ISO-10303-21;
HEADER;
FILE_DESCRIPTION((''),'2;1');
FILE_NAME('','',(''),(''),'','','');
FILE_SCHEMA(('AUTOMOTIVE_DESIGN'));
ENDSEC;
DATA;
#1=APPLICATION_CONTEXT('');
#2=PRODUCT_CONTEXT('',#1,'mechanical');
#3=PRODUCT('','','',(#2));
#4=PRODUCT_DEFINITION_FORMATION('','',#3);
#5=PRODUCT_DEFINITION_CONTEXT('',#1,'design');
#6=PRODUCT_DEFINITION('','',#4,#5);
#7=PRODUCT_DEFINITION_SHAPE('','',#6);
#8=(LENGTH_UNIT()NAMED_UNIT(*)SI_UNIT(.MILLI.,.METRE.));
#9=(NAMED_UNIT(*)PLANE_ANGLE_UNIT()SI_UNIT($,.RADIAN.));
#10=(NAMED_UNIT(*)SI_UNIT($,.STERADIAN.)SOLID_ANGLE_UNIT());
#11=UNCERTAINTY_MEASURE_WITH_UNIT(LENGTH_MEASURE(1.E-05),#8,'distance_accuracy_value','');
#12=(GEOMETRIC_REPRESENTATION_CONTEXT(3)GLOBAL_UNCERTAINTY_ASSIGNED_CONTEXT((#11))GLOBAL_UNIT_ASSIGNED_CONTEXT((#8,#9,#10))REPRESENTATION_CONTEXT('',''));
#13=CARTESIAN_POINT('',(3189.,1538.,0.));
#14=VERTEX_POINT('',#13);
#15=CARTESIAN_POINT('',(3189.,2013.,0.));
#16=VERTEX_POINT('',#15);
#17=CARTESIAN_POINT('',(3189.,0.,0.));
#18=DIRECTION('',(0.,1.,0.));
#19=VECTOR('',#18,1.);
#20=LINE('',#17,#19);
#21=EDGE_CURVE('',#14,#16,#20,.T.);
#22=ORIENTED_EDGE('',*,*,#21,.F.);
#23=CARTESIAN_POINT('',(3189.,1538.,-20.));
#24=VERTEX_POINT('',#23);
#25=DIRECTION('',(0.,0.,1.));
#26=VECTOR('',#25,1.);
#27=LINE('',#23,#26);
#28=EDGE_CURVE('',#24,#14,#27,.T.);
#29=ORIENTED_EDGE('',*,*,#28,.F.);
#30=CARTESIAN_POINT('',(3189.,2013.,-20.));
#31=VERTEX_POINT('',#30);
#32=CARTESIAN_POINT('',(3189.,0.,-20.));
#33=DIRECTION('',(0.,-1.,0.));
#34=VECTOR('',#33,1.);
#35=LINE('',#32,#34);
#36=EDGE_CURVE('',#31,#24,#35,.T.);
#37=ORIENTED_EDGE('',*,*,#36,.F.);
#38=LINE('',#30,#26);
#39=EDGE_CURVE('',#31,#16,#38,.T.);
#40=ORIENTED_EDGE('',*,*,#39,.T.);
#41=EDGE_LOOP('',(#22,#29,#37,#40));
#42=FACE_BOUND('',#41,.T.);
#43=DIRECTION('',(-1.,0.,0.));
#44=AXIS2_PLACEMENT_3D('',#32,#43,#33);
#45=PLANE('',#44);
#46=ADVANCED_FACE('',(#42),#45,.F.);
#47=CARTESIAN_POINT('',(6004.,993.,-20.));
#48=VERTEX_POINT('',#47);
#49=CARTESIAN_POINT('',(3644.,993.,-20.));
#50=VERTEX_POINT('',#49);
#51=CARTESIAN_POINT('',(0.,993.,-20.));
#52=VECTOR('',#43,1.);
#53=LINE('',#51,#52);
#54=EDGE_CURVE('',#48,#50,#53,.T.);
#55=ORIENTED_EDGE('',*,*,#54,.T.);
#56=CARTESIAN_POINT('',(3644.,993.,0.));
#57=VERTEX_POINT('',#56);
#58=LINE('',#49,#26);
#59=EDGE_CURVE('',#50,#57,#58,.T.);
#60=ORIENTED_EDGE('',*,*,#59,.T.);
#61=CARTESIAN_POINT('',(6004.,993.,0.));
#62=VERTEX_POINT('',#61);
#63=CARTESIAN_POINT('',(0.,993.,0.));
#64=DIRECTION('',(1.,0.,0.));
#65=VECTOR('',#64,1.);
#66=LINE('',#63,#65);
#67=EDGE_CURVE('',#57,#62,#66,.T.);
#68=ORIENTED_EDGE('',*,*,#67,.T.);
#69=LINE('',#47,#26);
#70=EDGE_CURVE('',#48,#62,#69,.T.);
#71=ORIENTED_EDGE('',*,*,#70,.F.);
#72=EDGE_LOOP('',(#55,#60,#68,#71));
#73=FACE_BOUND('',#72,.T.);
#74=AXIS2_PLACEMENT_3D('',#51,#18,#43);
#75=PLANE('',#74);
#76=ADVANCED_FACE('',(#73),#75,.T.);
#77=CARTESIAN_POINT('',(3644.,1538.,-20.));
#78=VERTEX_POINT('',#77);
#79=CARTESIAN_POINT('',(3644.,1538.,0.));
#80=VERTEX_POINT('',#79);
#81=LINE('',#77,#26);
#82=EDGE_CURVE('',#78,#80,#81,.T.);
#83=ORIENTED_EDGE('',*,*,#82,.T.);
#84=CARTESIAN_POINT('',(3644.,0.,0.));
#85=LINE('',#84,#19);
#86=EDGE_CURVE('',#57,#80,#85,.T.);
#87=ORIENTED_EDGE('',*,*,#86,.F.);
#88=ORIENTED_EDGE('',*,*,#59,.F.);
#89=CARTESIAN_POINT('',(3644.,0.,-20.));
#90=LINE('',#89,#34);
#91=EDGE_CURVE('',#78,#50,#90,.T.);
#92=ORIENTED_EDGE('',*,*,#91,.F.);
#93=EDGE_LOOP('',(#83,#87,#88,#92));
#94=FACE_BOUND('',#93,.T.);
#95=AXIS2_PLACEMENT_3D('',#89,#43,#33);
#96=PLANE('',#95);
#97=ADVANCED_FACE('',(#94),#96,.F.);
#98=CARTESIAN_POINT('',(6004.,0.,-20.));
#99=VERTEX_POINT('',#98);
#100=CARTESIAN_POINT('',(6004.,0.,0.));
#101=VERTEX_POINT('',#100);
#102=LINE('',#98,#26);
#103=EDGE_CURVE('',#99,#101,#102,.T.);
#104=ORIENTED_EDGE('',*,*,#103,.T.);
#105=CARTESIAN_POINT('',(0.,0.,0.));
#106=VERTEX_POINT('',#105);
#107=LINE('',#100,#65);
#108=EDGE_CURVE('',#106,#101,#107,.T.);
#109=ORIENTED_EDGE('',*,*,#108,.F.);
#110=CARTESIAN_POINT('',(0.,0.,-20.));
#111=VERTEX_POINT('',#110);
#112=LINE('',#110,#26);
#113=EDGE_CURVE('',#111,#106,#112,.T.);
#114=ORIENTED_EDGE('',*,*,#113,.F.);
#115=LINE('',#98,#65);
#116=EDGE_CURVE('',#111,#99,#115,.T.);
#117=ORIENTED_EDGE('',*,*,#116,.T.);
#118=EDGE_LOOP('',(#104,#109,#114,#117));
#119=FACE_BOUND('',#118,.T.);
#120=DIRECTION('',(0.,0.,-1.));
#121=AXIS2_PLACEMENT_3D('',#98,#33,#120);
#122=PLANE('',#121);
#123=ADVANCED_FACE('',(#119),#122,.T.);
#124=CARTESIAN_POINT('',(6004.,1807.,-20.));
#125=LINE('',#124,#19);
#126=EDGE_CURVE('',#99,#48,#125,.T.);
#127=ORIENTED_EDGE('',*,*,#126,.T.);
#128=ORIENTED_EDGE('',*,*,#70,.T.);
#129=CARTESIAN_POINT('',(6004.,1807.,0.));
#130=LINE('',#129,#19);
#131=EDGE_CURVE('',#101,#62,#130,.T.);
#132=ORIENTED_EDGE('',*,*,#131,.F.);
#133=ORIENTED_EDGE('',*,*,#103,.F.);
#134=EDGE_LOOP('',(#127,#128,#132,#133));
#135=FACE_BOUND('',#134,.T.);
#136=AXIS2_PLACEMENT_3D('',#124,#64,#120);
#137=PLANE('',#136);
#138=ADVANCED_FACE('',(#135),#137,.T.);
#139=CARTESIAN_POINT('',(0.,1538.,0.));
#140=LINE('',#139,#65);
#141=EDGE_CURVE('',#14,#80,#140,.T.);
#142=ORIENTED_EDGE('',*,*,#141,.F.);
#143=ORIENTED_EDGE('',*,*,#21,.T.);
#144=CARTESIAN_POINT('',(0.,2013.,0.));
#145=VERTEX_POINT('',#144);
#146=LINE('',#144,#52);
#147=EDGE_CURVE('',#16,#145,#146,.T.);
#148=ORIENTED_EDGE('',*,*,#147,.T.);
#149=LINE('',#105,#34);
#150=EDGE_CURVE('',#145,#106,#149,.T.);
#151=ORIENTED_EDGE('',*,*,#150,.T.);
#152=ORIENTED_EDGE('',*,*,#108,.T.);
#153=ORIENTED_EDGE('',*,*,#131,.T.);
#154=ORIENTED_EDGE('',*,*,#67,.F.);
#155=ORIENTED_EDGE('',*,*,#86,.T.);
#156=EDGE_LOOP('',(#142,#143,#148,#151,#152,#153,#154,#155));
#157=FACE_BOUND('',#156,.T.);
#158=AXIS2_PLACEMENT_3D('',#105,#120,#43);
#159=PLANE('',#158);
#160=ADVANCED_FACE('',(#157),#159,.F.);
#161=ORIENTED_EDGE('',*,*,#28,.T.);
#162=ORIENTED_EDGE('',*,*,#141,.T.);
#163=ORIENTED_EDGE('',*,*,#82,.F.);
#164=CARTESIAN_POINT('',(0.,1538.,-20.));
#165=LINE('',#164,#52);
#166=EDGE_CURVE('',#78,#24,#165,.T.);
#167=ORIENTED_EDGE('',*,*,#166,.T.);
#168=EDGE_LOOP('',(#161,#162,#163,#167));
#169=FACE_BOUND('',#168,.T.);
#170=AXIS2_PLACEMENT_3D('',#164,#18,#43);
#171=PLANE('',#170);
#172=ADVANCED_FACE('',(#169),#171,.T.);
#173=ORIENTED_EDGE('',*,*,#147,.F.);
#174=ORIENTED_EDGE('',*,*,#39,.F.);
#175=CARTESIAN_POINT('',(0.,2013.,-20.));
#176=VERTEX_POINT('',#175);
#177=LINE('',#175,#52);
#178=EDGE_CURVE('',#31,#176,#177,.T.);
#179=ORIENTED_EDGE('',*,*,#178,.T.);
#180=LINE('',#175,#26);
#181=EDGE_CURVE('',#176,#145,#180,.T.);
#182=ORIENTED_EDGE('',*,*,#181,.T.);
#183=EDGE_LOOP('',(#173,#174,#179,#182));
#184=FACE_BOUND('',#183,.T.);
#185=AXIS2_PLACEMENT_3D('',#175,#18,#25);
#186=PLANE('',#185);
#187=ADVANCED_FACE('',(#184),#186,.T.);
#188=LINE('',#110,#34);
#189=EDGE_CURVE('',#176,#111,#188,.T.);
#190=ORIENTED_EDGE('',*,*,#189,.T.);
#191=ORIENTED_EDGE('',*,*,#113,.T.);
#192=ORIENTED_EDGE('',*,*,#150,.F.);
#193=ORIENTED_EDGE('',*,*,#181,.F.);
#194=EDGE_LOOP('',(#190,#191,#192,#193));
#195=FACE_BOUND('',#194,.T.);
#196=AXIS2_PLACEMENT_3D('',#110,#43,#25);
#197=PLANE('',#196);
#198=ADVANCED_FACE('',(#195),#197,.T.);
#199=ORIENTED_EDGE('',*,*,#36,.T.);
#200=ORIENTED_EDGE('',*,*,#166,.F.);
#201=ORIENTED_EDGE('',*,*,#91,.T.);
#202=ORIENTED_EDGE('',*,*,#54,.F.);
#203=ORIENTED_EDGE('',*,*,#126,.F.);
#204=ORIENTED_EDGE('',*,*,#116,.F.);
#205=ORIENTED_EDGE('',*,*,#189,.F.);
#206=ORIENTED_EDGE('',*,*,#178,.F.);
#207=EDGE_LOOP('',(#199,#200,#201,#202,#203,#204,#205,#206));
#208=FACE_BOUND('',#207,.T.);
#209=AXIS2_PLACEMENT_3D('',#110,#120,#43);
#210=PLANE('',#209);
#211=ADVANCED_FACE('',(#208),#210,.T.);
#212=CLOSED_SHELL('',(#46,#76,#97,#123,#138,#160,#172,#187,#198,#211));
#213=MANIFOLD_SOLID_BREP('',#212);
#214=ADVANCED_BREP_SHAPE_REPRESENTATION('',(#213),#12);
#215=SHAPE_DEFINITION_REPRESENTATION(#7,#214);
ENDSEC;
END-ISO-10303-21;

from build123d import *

# Parameters (mm, degrees)
TABAN_FLAN_1_DEPTH         = 20
KES_EKSTR_ZYON1_DEPTH      = 6333.502270035
KES_EKSTR_ZYON1_DEPTH_BACK = 6333.502270035
IZIM2_W                    = 2360
IZIM2_H                    = 545
IZIM2_W_2                  = 379
IZIM2_H_2                  = 206


# Sheet-metal steps are written as plain solids
with BuildPart() as part:
    # Çizim1 → Taban-Flanş1 (new body)
    with BuildSketch(Plane.XY):
        Polygon((0, 0), (0, 2013), (3568, 2013), (3568, 1807), (6004, 1807), (6004, 0), align=None)
    extrude(amount=-TABAN_FLAN_1_DEPTH)

    # Çizim2 → Kes-Ekstrüzyon1 (cut, two sides: drawn at the far end of the back side and taken through both)
    with BuildSketch(Plane.XY.offset(-KES_EKSTR_ZYON1_DEPTH_BACK)):
        with Locations((4824, 1265.5)):
            Rectangle(IZIM2_W, IZIM2_H)
        Polygon((6004, 1538), (6004, 1807), (3568, 1807), (3189, 1807), (3189, 1538), (3644, 1538), align=None)
        with Locations((3378.5, 1910)):
            Rectangle(IZIM2_W_2, IZIM2_H_2)
    extrude(amount=KES_EKSTR_ZYON1_DEPTH + KES_EKSTR_ZYON1_DEPTH_BACK, mode=Mode.SUBTRACT)


solid = part.part
